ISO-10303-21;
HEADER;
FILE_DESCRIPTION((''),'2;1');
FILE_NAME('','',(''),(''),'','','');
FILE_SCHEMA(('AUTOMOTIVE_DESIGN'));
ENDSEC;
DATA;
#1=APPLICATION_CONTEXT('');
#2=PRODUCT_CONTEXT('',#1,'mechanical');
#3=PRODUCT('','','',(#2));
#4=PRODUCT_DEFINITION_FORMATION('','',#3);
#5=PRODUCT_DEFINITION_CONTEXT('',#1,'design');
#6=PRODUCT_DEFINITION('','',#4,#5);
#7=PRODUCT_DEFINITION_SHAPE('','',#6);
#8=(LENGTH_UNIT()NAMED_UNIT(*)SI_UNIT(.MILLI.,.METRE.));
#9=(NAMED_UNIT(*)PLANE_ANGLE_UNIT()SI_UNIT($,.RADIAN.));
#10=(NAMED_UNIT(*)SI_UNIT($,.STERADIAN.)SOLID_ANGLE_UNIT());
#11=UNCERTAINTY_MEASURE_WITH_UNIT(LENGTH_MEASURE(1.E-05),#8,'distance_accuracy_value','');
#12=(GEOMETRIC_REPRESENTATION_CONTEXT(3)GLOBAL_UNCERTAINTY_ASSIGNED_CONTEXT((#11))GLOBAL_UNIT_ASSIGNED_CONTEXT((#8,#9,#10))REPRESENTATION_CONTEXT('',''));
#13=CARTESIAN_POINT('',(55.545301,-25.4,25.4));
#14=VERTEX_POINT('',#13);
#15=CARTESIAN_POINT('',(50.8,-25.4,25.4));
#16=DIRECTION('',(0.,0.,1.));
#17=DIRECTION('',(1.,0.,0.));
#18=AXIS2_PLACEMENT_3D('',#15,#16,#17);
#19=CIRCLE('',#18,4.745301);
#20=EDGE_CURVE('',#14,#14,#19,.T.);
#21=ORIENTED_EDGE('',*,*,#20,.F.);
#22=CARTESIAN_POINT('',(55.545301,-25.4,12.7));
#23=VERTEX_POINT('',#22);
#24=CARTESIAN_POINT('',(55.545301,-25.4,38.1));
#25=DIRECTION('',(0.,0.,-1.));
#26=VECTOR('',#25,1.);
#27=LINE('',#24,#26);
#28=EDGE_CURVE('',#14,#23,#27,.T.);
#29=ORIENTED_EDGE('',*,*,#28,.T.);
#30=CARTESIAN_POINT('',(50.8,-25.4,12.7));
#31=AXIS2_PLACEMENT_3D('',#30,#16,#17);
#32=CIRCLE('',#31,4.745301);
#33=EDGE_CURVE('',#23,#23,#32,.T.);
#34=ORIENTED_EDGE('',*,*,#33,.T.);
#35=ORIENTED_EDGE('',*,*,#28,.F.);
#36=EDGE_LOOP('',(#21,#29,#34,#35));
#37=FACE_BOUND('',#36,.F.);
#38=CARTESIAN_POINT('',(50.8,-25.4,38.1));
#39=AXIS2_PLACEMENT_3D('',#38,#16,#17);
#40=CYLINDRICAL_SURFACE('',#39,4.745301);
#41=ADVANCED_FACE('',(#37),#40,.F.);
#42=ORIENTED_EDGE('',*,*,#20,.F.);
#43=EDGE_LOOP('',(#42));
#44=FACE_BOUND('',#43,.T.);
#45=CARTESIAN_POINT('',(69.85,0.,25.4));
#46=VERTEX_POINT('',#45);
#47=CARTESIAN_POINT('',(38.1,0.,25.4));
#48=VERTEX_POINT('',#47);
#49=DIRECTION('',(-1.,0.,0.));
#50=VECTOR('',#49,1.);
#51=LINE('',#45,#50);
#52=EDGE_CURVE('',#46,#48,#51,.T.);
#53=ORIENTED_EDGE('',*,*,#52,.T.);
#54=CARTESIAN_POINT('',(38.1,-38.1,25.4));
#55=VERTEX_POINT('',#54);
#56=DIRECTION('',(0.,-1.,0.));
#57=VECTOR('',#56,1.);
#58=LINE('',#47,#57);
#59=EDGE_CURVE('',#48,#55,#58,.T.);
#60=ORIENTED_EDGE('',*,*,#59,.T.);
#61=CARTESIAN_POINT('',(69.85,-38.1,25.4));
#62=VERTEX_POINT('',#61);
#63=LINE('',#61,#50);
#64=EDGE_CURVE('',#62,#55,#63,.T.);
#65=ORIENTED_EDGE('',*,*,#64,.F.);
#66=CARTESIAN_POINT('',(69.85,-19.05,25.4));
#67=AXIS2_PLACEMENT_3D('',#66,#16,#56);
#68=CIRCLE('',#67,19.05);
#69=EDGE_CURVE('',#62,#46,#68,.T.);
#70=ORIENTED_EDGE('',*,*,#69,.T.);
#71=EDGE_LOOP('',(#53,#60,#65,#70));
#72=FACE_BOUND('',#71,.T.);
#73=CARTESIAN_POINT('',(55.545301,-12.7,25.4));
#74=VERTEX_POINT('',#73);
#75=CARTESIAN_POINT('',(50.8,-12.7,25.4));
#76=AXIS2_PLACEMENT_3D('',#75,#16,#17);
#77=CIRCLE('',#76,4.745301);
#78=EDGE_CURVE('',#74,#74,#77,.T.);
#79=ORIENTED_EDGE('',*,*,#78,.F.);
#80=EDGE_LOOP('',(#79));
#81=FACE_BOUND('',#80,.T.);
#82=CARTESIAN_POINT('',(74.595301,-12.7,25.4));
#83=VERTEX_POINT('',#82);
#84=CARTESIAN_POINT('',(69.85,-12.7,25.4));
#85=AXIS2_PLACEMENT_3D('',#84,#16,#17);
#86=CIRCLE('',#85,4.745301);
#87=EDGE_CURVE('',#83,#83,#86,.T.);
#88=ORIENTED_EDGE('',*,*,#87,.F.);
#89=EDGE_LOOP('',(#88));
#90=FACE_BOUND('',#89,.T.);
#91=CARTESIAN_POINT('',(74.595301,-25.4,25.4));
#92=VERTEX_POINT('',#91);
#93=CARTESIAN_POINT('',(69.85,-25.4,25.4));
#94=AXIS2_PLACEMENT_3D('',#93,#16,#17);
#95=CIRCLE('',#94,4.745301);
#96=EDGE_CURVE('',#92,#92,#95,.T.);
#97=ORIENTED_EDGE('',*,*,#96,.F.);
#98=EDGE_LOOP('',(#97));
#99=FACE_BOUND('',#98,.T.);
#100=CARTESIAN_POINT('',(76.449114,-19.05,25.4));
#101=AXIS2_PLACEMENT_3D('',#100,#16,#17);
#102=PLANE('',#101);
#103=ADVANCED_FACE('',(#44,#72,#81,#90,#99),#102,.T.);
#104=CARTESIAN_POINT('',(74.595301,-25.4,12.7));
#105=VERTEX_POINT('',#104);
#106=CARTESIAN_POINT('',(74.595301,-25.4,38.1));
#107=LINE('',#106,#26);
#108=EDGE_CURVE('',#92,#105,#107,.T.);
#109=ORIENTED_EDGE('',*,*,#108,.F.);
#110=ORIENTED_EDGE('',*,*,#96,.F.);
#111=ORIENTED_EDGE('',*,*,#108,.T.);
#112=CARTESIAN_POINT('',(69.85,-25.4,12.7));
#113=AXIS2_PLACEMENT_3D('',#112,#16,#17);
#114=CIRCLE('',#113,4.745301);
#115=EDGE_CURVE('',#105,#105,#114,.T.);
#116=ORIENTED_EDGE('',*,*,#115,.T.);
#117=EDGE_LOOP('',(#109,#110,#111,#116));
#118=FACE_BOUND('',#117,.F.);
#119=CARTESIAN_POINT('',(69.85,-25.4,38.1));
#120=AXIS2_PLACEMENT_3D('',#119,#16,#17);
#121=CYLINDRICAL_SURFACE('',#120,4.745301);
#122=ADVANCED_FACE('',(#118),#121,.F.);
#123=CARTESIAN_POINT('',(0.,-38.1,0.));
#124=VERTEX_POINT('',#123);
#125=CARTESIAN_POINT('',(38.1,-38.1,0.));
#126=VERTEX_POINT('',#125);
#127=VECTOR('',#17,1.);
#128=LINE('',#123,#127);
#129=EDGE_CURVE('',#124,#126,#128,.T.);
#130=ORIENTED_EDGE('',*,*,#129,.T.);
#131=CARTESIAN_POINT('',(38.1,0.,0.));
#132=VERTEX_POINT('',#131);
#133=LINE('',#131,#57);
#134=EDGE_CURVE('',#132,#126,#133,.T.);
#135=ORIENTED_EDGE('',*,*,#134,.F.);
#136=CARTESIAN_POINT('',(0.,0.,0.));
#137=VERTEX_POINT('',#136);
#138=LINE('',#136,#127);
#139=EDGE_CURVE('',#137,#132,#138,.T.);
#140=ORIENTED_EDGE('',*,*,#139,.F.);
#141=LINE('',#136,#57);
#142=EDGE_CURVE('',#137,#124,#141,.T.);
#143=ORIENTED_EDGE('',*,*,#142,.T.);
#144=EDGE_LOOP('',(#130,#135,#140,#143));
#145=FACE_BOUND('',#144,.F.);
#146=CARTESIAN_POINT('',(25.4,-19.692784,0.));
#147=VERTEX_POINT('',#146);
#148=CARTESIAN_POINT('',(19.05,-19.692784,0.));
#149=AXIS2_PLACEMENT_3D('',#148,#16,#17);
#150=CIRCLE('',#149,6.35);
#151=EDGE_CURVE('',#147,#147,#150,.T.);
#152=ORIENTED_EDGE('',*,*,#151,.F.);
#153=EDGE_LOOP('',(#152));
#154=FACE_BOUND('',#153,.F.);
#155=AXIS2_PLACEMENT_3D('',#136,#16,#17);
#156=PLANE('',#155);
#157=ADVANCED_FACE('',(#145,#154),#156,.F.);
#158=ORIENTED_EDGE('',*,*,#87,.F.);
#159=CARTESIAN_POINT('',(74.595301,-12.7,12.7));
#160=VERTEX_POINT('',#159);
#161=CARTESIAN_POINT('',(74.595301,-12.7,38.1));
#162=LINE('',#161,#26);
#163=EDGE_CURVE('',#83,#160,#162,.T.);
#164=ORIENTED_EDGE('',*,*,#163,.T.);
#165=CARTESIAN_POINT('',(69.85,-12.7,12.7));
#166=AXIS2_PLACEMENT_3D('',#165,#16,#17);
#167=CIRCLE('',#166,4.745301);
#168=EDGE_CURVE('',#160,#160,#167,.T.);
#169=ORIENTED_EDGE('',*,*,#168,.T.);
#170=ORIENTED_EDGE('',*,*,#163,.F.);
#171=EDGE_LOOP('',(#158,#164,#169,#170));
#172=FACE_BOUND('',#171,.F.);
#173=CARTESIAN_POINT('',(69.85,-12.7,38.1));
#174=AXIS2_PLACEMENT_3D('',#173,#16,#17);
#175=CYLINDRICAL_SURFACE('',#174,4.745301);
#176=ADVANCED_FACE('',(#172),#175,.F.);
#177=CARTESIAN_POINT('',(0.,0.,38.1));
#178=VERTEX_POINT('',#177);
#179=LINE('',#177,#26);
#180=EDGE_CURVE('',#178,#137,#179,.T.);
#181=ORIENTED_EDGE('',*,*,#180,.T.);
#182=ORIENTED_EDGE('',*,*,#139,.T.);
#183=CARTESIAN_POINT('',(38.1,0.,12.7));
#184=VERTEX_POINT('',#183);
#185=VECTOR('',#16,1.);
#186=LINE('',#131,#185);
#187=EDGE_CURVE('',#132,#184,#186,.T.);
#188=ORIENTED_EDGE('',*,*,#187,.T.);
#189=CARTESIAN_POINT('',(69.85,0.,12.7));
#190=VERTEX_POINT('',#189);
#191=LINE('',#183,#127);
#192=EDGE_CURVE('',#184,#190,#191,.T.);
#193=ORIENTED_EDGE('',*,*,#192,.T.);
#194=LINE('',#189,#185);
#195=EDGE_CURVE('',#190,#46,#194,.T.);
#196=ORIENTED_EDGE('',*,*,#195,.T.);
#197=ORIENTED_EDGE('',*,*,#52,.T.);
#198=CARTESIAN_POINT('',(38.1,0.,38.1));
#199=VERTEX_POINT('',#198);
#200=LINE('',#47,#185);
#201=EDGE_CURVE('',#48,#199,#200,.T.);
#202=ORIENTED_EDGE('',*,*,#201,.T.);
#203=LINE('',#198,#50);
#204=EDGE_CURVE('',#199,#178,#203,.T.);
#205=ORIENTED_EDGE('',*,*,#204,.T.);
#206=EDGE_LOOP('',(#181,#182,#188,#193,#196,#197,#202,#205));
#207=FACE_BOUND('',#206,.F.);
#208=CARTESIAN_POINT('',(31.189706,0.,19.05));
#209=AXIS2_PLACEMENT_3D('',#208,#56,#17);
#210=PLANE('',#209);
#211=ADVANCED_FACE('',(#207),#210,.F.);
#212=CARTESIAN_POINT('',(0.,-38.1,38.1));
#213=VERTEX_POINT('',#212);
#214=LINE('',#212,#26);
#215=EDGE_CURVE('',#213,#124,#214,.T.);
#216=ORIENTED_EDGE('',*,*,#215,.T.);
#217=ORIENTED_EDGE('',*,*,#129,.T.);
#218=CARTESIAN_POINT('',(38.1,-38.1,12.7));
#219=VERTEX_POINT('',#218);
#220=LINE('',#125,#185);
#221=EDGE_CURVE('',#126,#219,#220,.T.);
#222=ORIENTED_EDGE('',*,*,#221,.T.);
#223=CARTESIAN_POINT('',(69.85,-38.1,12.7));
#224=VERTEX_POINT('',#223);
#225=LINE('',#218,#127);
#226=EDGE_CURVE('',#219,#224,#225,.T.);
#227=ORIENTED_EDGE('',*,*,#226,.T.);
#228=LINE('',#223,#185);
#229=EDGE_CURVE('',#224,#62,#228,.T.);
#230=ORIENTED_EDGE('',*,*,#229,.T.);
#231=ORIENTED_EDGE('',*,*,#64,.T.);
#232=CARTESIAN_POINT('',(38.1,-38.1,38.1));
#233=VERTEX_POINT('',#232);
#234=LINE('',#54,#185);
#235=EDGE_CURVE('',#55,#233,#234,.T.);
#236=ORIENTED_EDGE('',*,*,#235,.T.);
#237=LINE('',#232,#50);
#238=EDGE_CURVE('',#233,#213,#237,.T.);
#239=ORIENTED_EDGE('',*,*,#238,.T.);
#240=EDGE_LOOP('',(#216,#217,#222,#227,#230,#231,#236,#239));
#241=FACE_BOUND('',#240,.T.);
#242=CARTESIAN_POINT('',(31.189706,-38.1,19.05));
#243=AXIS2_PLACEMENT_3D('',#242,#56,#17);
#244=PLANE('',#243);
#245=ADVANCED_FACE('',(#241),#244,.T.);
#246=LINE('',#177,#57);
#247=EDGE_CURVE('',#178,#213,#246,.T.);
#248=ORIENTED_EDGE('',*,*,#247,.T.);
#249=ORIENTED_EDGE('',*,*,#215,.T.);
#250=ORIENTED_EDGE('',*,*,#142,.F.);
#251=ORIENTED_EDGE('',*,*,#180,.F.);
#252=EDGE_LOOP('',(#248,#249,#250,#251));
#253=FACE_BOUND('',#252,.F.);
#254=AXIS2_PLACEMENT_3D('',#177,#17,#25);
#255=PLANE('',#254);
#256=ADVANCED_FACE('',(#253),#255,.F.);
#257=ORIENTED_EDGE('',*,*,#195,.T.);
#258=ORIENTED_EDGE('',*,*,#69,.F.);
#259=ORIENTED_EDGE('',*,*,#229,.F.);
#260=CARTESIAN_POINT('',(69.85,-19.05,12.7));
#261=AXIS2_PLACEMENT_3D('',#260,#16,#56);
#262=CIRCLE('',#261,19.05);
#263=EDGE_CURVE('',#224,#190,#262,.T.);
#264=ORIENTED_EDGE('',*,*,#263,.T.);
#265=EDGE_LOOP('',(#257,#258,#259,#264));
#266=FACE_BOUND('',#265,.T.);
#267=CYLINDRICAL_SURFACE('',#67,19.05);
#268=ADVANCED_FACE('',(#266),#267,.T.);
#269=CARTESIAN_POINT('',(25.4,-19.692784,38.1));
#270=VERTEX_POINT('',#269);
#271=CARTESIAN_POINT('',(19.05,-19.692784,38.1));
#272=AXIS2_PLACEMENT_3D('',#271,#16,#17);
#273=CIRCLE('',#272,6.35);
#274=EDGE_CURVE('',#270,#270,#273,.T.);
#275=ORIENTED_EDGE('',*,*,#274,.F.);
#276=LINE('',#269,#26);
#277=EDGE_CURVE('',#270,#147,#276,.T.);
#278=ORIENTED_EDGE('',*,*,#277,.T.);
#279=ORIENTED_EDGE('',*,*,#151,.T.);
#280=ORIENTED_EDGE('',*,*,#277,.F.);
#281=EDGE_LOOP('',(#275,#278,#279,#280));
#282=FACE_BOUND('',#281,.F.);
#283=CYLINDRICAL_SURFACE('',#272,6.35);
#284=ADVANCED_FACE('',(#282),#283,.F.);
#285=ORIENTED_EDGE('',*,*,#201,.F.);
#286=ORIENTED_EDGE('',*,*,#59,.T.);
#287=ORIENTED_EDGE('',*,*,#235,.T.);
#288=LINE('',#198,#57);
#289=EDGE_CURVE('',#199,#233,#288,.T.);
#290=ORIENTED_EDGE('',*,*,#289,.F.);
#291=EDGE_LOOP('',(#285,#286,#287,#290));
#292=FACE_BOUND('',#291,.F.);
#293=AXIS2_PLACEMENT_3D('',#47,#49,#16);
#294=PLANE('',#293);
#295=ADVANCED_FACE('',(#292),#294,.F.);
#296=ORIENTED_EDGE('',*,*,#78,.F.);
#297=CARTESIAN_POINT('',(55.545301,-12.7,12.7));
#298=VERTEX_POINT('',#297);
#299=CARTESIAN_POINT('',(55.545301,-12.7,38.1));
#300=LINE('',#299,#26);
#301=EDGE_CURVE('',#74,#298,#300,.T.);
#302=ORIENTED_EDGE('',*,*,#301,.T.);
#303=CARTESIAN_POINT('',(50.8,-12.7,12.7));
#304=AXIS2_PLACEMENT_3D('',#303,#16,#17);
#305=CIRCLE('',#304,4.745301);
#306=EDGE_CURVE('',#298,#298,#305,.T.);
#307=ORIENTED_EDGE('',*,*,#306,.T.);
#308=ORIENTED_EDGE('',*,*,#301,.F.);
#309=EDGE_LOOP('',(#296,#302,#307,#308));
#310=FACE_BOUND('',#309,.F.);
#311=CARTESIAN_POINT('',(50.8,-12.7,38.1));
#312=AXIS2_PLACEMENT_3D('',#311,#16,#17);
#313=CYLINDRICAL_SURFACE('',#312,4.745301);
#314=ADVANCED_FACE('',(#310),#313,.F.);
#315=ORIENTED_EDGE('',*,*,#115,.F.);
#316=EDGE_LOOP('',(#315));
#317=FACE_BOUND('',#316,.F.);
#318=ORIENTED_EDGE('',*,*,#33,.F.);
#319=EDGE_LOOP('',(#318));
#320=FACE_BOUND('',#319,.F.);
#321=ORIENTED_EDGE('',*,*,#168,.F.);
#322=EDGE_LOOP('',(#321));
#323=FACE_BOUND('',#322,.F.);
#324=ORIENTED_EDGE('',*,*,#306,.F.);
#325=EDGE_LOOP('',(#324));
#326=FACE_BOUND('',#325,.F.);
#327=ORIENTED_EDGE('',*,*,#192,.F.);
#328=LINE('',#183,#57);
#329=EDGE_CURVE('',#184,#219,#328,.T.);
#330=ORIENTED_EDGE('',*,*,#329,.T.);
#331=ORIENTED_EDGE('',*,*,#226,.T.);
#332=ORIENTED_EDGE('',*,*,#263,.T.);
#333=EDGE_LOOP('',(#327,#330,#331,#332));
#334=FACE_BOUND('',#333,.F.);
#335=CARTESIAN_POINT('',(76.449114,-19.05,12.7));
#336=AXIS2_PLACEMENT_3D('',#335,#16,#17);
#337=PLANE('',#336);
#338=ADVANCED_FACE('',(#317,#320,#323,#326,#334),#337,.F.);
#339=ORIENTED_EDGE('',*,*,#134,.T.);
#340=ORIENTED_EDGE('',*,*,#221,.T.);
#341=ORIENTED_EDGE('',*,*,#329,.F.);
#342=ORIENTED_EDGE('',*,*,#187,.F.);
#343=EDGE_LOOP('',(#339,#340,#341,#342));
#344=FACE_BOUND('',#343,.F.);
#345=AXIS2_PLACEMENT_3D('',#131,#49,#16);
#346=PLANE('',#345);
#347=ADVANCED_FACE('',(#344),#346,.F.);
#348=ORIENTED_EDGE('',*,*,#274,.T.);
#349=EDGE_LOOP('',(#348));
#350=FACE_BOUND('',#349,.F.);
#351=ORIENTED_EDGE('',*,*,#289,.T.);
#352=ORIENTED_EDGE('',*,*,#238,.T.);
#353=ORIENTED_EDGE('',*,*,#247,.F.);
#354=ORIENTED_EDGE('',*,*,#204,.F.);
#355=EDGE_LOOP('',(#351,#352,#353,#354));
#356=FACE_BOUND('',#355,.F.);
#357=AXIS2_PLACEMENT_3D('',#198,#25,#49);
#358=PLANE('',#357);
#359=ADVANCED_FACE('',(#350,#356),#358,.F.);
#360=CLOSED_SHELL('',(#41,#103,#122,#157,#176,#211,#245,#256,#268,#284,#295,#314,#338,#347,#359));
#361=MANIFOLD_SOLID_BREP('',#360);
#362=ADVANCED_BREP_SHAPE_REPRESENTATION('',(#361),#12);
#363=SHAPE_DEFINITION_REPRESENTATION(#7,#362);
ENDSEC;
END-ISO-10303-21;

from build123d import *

# Parameters (mm, degrees)
F1_DEPTH = 38.1
F3_DEPTH = 12.7
F4_R     = 6.35
F4_R_2   = 4.745300615
F5_DEPTH = 38.101


# Not quite as in the source:
# - a feature names something its author has since deleted; it is built from what else it names


with BuildPart() as f1:
    # F0 (on Front) → F1 (new body)
    with BuildSketch(Plane.XZ):
        Polygon((0, 38.1), (0, 0), (38.1, 0), (38.1, 12.7), (69.85, 12.7), (69.85, 25.4), (38.1, 25.4), (38.1, 38.1), align=None)
    extrude(amount=F1_DEPTH)

    # F2 (on face) → F3 (join)
    with BuildSketch(Plane.XY.offset(25.4)):
        with BuildLine():
            Line((69.85, 0), (69.85, -38.1))
            ThreePointArc((69.85, -38.1), (88.9, -19.05), (69.85, 0))
        make_face()
    extrude(amount=-F3_DEPTH)

    # F4 (on face) → F5 (cut, through all)
    with BuildSketch(Plane.XY.offset(38.1)):
        with Locations((19.05, -19.6927841753)):
            Circle(F4_R)
        with Locations((50.8, -12.7)):
            Circle(F4_R_2)
        with Locations((50.8, -25.4)):
            Circle(F4_R_2)
        with Locations((69.85, -25.4)):
            Circle(F4_R_2)
        with Locations((69.85, -12.7)):
            Circle(F4_R_2)
    extrude(amount=-F5_DEPTH, mode=Mode.SUBTRACT)


solid = f1.part
